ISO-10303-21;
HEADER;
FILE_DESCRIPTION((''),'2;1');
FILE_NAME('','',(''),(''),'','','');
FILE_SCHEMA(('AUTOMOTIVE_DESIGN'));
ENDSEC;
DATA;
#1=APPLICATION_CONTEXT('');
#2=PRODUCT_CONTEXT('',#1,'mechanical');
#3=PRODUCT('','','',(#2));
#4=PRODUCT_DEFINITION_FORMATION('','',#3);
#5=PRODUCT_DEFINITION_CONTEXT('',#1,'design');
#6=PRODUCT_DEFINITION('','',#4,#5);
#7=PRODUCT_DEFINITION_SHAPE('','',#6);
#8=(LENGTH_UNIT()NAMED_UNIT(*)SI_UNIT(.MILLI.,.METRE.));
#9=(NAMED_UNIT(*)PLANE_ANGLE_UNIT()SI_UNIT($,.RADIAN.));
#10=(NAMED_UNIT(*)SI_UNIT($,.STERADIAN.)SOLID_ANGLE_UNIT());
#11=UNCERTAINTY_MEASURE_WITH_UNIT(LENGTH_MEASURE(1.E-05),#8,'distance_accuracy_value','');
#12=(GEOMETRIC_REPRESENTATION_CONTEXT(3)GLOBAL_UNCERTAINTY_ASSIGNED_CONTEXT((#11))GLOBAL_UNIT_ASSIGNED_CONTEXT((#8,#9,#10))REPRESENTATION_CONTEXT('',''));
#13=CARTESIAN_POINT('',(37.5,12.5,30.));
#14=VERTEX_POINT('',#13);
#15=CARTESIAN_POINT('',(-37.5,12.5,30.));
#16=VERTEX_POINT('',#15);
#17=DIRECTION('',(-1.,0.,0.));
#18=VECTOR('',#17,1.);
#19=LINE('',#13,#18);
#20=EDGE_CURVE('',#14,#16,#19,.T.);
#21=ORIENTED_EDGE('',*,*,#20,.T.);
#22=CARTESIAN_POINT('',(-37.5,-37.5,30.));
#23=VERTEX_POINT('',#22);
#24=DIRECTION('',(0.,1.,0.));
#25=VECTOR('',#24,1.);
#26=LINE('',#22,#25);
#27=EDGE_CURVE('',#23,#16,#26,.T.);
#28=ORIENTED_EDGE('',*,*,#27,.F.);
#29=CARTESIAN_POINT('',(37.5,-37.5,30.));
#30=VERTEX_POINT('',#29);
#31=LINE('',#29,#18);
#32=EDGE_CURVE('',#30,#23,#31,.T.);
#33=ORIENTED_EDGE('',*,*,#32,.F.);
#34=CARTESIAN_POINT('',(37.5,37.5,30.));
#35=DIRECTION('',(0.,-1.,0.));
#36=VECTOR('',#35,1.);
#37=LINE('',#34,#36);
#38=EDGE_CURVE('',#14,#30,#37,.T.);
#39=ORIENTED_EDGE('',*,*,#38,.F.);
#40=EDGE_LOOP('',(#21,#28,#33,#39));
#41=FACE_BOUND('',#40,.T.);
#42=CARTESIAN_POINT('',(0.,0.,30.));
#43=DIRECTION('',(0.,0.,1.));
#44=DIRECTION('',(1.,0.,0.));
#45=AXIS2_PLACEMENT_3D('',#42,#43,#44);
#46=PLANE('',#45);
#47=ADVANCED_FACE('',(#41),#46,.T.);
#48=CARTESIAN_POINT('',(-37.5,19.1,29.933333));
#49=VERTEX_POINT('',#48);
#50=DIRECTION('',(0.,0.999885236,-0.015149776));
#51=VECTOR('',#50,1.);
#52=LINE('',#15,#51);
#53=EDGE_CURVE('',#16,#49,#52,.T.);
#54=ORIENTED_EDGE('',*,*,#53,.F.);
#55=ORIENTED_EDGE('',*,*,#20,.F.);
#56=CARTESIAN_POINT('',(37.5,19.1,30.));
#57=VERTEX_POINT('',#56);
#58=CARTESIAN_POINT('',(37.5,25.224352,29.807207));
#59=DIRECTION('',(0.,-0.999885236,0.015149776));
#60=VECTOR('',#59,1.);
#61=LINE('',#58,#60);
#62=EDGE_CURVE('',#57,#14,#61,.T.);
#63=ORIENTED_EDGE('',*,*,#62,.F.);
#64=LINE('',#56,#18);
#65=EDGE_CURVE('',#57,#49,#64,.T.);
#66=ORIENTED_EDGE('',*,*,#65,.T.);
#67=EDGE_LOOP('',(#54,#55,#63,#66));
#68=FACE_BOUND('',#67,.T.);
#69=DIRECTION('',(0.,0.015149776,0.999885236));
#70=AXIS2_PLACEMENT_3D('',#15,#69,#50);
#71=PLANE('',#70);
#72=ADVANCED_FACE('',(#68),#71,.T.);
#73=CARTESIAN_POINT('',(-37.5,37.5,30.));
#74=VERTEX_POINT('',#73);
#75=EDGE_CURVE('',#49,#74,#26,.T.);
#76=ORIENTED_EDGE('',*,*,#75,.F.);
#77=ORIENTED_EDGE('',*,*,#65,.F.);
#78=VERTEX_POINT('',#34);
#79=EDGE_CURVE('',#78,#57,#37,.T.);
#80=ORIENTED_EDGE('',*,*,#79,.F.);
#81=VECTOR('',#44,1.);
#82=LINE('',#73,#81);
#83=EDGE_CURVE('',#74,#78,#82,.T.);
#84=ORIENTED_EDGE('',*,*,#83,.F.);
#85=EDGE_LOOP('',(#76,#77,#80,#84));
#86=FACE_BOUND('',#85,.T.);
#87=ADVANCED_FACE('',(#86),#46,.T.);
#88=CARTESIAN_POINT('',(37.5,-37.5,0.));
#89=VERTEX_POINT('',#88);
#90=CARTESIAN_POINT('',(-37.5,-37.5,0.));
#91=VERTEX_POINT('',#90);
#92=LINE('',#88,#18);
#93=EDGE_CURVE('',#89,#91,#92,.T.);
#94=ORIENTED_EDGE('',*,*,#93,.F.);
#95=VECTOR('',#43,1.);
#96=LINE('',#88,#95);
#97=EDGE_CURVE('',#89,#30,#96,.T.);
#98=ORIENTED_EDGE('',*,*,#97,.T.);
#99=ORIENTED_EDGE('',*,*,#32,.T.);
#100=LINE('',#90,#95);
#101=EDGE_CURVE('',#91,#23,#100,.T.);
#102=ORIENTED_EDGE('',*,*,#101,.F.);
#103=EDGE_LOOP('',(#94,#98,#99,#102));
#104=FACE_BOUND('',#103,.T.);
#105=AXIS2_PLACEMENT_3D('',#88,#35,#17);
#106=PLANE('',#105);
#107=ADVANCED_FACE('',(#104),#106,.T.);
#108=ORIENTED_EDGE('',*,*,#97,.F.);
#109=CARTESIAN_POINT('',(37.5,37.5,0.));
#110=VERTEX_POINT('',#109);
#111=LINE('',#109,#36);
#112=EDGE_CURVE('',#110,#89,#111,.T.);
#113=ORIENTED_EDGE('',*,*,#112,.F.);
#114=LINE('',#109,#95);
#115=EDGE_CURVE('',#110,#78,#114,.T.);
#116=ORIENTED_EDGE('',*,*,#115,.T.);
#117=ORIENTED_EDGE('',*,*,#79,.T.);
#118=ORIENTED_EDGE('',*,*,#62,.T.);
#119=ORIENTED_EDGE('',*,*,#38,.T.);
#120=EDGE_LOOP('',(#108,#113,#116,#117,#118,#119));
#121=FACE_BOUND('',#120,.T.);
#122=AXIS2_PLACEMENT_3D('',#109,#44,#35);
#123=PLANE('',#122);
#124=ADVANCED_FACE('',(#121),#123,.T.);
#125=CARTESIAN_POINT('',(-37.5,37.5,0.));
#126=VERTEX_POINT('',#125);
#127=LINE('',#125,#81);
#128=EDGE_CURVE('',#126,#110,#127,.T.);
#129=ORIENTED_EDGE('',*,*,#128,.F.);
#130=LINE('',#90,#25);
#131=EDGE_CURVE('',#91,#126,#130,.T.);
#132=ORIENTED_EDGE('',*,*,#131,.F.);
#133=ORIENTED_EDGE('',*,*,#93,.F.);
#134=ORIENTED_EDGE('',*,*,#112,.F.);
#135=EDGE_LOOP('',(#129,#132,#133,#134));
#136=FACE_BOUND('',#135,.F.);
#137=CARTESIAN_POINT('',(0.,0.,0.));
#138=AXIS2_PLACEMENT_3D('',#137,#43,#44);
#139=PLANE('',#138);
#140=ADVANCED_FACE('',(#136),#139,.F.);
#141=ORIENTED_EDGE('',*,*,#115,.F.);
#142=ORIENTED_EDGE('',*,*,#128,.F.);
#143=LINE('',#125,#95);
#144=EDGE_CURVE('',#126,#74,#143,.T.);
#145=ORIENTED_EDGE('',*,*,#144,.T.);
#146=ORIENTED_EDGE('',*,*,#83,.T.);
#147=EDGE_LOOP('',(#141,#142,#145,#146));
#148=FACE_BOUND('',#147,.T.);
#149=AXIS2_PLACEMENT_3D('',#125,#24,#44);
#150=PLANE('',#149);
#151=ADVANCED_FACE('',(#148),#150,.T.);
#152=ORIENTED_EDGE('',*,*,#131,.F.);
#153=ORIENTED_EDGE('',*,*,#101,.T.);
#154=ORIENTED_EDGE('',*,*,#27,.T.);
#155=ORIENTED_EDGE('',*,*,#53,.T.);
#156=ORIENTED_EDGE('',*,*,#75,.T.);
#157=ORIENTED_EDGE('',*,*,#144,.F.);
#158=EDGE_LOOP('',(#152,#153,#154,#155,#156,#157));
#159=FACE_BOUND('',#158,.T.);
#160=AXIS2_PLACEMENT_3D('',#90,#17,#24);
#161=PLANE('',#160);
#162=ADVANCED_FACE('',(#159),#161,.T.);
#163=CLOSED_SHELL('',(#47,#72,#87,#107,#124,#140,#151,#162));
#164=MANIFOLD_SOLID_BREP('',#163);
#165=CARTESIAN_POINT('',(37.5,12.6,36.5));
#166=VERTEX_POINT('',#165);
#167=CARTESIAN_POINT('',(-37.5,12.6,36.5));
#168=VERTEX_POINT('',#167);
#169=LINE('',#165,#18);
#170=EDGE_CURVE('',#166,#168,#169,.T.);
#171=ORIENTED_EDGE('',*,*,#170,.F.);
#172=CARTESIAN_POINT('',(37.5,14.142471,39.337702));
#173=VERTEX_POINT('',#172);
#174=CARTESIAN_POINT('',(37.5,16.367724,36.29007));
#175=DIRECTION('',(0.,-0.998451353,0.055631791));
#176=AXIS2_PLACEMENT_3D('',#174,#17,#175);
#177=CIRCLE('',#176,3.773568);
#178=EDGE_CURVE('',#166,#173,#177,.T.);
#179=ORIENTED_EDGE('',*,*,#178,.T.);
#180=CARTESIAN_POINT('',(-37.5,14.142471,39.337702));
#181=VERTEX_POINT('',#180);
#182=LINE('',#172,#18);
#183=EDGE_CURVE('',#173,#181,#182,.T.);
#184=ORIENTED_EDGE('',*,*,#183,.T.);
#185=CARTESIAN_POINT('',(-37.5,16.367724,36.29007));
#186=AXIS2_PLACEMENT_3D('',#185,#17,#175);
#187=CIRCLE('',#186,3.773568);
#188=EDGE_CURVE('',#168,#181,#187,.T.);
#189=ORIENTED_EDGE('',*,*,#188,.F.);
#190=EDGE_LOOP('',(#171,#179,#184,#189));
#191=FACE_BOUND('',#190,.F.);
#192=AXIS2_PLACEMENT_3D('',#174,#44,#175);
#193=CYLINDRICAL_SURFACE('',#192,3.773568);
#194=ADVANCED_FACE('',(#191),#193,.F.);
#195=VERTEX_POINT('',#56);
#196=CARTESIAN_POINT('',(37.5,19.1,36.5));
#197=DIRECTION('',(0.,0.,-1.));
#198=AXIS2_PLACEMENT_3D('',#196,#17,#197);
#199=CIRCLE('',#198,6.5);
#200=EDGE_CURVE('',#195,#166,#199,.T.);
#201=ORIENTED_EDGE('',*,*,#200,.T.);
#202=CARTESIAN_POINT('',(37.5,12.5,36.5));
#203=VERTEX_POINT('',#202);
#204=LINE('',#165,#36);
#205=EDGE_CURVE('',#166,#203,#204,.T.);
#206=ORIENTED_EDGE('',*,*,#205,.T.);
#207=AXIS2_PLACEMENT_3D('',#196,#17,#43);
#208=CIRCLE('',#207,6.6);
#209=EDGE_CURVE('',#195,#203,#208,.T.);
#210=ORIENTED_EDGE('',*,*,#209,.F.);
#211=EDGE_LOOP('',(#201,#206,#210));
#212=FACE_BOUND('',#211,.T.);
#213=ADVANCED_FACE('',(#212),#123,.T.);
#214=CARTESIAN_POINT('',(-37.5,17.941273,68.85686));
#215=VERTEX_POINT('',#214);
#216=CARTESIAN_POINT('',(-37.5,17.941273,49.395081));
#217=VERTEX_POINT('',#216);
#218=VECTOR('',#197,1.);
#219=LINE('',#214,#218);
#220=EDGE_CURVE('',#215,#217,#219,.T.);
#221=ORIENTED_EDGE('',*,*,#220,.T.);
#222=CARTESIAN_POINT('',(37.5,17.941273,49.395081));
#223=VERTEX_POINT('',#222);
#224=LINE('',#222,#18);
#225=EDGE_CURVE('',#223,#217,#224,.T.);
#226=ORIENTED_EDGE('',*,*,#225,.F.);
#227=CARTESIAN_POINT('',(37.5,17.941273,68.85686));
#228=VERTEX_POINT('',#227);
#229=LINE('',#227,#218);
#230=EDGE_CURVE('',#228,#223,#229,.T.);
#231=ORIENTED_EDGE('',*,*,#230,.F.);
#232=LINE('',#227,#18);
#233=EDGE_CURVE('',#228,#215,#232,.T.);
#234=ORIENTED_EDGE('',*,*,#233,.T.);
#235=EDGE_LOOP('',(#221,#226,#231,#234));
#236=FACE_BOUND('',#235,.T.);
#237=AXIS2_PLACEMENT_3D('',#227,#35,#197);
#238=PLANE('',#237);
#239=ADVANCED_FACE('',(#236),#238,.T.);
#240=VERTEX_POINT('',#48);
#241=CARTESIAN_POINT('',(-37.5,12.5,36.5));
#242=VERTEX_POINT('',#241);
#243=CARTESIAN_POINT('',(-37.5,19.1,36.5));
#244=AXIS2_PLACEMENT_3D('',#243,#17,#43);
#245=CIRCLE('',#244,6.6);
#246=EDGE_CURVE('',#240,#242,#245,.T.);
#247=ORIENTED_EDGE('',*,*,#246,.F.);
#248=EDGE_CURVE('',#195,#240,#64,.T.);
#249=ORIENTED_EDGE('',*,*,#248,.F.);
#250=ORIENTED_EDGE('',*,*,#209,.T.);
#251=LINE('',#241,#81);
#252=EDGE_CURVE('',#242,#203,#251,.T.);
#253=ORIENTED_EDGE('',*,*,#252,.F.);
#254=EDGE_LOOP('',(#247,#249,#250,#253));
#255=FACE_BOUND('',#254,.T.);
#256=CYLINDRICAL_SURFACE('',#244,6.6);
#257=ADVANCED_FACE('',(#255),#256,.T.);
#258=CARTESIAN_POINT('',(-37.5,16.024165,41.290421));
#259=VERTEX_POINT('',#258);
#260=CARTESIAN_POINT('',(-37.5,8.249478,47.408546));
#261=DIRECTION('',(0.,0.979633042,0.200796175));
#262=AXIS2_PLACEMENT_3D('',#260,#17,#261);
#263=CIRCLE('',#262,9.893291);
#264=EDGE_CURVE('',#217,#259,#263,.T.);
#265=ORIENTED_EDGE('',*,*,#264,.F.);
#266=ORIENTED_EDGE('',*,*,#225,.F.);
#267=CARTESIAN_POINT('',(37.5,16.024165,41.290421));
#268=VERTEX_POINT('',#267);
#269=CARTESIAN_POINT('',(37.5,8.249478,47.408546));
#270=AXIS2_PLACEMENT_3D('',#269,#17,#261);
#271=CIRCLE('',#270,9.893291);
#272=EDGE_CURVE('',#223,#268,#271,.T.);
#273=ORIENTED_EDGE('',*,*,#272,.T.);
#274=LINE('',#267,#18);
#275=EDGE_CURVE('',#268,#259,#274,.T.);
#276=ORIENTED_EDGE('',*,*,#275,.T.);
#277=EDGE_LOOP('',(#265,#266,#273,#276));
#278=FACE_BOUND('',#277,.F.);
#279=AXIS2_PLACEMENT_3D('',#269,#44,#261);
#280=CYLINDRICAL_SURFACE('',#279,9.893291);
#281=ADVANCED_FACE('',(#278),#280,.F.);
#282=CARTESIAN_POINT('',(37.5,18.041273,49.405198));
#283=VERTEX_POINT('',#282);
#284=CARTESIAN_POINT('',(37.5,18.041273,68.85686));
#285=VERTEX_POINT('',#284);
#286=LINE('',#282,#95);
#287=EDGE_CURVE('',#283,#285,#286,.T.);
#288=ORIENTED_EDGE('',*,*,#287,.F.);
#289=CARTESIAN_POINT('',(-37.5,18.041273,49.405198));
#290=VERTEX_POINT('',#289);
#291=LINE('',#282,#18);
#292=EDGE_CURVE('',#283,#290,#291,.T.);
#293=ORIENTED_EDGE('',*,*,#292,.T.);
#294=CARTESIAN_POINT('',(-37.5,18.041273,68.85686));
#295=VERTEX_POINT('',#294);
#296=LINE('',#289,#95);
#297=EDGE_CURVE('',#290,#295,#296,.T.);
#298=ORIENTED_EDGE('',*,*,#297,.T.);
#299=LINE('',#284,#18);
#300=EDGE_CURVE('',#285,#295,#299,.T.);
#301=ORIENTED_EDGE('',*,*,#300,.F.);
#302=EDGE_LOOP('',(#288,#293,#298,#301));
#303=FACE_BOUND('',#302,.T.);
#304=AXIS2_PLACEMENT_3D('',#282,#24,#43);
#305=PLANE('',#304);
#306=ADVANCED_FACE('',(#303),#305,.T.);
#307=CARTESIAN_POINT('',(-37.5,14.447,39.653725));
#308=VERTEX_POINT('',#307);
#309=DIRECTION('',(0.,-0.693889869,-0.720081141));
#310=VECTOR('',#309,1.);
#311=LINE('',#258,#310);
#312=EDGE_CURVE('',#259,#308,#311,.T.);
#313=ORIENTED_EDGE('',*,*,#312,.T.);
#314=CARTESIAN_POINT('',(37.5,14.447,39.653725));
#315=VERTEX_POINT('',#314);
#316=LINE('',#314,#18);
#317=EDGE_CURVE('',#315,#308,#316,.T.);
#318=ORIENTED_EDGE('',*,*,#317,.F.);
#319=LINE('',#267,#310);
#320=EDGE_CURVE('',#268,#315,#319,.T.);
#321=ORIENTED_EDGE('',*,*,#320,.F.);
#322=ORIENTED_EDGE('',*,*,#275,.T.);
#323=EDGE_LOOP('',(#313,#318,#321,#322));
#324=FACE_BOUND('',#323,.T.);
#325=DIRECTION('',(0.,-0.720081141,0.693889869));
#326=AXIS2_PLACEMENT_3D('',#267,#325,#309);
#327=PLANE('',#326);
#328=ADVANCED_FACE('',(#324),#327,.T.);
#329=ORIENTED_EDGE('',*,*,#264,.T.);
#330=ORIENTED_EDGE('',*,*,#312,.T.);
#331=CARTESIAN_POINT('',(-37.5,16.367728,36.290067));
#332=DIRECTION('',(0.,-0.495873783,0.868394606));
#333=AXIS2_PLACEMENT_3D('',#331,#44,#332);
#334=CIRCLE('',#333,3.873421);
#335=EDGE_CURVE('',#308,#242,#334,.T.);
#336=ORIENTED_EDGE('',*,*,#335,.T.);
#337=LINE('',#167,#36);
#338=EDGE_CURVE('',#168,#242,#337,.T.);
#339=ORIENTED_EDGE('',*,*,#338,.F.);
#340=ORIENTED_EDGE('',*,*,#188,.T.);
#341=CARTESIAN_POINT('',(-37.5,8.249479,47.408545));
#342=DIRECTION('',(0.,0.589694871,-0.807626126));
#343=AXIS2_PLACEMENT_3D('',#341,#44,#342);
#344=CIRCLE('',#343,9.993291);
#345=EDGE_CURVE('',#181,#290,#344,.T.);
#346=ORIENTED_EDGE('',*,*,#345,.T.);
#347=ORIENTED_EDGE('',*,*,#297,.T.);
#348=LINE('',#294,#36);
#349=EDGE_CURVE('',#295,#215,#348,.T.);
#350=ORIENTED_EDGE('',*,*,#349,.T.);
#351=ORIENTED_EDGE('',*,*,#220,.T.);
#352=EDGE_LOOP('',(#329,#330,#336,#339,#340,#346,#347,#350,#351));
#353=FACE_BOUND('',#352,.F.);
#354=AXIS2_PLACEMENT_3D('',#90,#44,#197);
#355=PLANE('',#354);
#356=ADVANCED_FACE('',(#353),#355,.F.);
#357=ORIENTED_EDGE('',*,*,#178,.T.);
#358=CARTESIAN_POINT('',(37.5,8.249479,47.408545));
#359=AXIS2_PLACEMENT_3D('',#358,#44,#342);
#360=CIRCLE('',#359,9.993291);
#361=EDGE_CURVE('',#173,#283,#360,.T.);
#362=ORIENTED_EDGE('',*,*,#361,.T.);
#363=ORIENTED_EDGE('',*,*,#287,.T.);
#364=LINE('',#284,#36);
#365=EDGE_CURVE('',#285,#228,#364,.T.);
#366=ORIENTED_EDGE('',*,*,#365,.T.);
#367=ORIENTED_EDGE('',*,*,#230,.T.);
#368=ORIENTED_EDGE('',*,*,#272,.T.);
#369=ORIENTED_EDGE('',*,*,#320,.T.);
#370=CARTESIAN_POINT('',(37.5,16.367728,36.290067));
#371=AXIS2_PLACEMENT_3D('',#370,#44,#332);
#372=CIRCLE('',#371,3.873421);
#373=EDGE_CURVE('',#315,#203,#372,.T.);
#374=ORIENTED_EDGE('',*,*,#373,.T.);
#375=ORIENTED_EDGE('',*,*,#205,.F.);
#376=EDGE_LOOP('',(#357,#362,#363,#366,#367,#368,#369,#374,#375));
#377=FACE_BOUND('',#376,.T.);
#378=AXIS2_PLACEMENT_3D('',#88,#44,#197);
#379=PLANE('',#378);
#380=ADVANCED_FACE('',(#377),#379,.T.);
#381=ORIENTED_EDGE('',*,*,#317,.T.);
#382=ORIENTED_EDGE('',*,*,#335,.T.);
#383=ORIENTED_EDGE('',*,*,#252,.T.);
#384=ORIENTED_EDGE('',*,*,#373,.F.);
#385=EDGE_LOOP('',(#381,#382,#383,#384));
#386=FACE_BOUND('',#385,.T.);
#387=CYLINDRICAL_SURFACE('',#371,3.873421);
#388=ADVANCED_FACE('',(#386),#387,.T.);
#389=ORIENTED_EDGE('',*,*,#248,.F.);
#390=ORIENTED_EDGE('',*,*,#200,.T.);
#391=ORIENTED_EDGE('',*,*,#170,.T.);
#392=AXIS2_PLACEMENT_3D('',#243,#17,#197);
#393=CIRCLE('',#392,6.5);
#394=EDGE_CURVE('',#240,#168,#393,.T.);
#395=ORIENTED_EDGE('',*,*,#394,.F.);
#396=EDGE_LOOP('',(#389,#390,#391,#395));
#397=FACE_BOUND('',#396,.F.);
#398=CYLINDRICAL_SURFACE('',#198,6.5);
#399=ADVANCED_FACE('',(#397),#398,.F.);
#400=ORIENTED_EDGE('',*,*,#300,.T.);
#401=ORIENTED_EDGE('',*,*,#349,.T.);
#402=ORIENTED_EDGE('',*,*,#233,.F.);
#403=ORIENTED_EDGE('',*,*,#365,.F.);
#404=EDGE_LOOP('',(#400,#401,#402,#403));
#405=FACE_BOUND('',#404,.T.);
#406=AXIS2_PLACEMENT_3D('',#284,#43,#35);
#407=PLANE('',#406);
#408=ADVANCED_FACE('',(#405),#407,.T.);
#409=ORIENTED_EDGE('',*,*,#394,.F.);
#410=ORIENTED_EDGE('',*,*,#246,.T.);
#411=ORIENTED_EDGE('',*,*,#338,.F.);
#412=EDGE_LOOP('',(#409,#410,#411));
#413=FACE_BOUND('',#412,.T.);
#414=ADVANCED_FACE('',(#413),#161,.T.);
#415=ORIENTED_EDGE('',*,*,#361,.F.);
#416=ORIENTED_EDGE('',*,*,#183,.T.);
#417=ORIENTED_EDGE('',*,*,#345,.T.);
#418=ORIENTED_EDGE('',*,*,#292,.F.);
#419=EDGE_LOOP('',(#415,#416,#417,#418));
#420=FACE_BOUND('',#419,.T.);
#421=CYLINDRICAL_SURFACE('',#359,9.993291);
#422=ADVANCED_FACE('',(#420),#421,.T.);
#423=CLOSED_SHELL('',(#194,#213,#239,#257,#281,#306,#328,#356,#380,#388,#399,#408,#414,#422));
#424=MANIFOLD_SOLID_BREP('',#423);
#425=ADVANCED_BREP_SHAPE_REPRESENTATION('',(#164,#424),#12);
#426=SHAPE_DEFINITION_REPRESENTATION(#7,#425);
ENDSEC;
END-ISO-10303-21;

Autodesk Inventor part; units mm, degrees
ref_plane "YZ Plane" through (0, 0, 0) normal (1, 0, 0) x (0, 1, 0)
ref_plane "XZ Plane" through (0, 0, 0) normal (0, 1, 0) x (-1, 0, 0)
sketch "草图1" plane through (0, 0, 0) normal (0, 0, 1) x (1, 0, 0)
  line L0 (37.5, -37.5) -> (-37.5, -37.5)
  line L1 (-37.5, -37.5) -> (-37.5, 37.5)
  line L2 (-37.5, 37.5) -> (37.5, 37.5)
  line L3 (37.5, 37.5) -> (37.5, -37.5)
  line L4 (37.5, -37.5) -> (-37.5, 37.5) construction
  line L5 (-37.5, -37.5) -> (37.5, 37.5) construction
  point P0 (0, 0)
  dimension "d0" = 75
  dimension "d1" = 75
extrude "拉伸1" add sketch "草图1" along normal blind 30
sketch "草图2" plane through (-37.5, 37.5, 0) normal (0, 1, 0) x (1, 0, 0)
  point P0 (37.5, 0)
ref_plane "工作平面1" through (-37.5, 12.5, 0) normal (0, 1, 0) x (1, 0, 0)
sketch "草图3" plane through (-37.5, 12.5, 0) normal (0, 1, 0) x (1, 0, 0)
  line L0 (75, -30) -> (0, -30) projected
  line L1 (75, -30) -> (0, -30)
  line L2 (0, -30) -> (0, -80)
  line L3 (0, -80) -> (75, -80)
  line L4 (75, -80) -> (75, -30)
  line L5 (0, 0) -> (0, -30) projected
  point P0 (37.5, 0)
  dimension "d5" = 50
extrude "拉伸2" add sketch "草图3" along normal blind 0.1
fillet "圆角1" radius 6.5 1 edges at (0, 12.6, 30)
sketch "草图4" plane through (-37.5, -37.5, 0) normal (-1, 0, 0) x (0, 0, 1)
  arc A0 (30, 56.6) -> (36.5, 50.1) centre (36.5, 56.6) ccw projected
  circle A1 centre (36.5, 56.6) radius 6.6
  line L0 (80, 50) -> (30, 50) projected
  line L1 (30, 50) -> (29.9, 56.6)
  point P0 (0, 37.5)
  point P1 (29.90303, 56.400046)
  point P2 (36.5, 50)
extrude "拉伸3" cut sketch "草图4" against normal blind 112.5 contours A1 L0 L1
sketch "草图5" plane through (-37.5, 12.6, 0) normal (0, 1, 0) x (1, 0, 0)
  line L0 (0, -36.5) -> (75, -36.5) projected
  line L1 (0, -36.5) -> (0, -80) projected
  line L2 (0, -80) -> (75, -80) projected
  line L3 (75, -80) -> (75, -36.5) projected
  point P0 (37.5, 0)
extrude "拉伸4" cut sketch "草图5" against normal blind 10
sketch "草图6" plane through (37.5, -37.5, 0) normal (1, 0, 0) x (0, 0, -1)
  circle A0 centre (-36.290069, 53.867726) radius 3.77357
  circle A1 centre (-36.290069, 53.867726) radius 3.873419
  circle A2 centre (-47.408546, 45.749477) radius 9.893293
  circle A3 centre (-47.408546, 45.749477) radius 9.993293
  line L0 (-49.395081, 55.441273) -> (-68.85686, 55.441273)
  line L1 (-68.85686, 55.441273) -> (-68.85686, 55.541273)
  line L2 (-68.85686, 55.541273) -> (-49.395081, 55.541273)
  line L3 (-49.395081, 55.541273) -> (-49.395081, 55.441273)
  line L4 (-36.5, 50) -> (-36.5, 50.1)
  line L5 (-39.337702, 51.642471) -> (-41.290421, 53.524165)
  point P0 (0, 37.5)
  point P1 (-49.405198, 55.541273)
  point P2 (-39.653725, 51.947)
  dimension "d13" = 0.1
sketch "草图6 outline for 拉伸5" plane through (37.5, -37.5, 0) normal (1, 0, 0) x (0, 0, -1)
  line L0 (-36.5, 50) -> (-36.5, 50.1)
  arc A0 (-39.653725, 51.947) -> (-36.5, 50) centre (-36.290069, 53.867726) ccw
  line L1 (-41.290421, 53.524165) -> (-39.653725, 51.947)
  arc A1 (-49.395081, 55.441273) -> (-41.290421, 53.524165) centre (-47.408546, 45.749477) cw
  line L2 (-68.85686, 55.441273) -> (-49.395081, 55.441273)
  line L3 (-68.85686, 55.541273) -> (-68.85686, 55.441273)
  line L4 (-49.405198, 55.541273) -> (-68.85686, 55.541273)
  arc A2 (-39.337702, 51.642471) -> (-49.405198, 55.541273) centre (-47.408546, 45.749477) ccw
  arc A3 (-36.5, 50.1) -> (-39.337702, 51.642471) centre (-36.290069, 53.867726) cw
extrude "拉伸5" add sketch "草图6 outline for 拉伸5" against normal up to surface (75 mm away)
properties part number "便签"
